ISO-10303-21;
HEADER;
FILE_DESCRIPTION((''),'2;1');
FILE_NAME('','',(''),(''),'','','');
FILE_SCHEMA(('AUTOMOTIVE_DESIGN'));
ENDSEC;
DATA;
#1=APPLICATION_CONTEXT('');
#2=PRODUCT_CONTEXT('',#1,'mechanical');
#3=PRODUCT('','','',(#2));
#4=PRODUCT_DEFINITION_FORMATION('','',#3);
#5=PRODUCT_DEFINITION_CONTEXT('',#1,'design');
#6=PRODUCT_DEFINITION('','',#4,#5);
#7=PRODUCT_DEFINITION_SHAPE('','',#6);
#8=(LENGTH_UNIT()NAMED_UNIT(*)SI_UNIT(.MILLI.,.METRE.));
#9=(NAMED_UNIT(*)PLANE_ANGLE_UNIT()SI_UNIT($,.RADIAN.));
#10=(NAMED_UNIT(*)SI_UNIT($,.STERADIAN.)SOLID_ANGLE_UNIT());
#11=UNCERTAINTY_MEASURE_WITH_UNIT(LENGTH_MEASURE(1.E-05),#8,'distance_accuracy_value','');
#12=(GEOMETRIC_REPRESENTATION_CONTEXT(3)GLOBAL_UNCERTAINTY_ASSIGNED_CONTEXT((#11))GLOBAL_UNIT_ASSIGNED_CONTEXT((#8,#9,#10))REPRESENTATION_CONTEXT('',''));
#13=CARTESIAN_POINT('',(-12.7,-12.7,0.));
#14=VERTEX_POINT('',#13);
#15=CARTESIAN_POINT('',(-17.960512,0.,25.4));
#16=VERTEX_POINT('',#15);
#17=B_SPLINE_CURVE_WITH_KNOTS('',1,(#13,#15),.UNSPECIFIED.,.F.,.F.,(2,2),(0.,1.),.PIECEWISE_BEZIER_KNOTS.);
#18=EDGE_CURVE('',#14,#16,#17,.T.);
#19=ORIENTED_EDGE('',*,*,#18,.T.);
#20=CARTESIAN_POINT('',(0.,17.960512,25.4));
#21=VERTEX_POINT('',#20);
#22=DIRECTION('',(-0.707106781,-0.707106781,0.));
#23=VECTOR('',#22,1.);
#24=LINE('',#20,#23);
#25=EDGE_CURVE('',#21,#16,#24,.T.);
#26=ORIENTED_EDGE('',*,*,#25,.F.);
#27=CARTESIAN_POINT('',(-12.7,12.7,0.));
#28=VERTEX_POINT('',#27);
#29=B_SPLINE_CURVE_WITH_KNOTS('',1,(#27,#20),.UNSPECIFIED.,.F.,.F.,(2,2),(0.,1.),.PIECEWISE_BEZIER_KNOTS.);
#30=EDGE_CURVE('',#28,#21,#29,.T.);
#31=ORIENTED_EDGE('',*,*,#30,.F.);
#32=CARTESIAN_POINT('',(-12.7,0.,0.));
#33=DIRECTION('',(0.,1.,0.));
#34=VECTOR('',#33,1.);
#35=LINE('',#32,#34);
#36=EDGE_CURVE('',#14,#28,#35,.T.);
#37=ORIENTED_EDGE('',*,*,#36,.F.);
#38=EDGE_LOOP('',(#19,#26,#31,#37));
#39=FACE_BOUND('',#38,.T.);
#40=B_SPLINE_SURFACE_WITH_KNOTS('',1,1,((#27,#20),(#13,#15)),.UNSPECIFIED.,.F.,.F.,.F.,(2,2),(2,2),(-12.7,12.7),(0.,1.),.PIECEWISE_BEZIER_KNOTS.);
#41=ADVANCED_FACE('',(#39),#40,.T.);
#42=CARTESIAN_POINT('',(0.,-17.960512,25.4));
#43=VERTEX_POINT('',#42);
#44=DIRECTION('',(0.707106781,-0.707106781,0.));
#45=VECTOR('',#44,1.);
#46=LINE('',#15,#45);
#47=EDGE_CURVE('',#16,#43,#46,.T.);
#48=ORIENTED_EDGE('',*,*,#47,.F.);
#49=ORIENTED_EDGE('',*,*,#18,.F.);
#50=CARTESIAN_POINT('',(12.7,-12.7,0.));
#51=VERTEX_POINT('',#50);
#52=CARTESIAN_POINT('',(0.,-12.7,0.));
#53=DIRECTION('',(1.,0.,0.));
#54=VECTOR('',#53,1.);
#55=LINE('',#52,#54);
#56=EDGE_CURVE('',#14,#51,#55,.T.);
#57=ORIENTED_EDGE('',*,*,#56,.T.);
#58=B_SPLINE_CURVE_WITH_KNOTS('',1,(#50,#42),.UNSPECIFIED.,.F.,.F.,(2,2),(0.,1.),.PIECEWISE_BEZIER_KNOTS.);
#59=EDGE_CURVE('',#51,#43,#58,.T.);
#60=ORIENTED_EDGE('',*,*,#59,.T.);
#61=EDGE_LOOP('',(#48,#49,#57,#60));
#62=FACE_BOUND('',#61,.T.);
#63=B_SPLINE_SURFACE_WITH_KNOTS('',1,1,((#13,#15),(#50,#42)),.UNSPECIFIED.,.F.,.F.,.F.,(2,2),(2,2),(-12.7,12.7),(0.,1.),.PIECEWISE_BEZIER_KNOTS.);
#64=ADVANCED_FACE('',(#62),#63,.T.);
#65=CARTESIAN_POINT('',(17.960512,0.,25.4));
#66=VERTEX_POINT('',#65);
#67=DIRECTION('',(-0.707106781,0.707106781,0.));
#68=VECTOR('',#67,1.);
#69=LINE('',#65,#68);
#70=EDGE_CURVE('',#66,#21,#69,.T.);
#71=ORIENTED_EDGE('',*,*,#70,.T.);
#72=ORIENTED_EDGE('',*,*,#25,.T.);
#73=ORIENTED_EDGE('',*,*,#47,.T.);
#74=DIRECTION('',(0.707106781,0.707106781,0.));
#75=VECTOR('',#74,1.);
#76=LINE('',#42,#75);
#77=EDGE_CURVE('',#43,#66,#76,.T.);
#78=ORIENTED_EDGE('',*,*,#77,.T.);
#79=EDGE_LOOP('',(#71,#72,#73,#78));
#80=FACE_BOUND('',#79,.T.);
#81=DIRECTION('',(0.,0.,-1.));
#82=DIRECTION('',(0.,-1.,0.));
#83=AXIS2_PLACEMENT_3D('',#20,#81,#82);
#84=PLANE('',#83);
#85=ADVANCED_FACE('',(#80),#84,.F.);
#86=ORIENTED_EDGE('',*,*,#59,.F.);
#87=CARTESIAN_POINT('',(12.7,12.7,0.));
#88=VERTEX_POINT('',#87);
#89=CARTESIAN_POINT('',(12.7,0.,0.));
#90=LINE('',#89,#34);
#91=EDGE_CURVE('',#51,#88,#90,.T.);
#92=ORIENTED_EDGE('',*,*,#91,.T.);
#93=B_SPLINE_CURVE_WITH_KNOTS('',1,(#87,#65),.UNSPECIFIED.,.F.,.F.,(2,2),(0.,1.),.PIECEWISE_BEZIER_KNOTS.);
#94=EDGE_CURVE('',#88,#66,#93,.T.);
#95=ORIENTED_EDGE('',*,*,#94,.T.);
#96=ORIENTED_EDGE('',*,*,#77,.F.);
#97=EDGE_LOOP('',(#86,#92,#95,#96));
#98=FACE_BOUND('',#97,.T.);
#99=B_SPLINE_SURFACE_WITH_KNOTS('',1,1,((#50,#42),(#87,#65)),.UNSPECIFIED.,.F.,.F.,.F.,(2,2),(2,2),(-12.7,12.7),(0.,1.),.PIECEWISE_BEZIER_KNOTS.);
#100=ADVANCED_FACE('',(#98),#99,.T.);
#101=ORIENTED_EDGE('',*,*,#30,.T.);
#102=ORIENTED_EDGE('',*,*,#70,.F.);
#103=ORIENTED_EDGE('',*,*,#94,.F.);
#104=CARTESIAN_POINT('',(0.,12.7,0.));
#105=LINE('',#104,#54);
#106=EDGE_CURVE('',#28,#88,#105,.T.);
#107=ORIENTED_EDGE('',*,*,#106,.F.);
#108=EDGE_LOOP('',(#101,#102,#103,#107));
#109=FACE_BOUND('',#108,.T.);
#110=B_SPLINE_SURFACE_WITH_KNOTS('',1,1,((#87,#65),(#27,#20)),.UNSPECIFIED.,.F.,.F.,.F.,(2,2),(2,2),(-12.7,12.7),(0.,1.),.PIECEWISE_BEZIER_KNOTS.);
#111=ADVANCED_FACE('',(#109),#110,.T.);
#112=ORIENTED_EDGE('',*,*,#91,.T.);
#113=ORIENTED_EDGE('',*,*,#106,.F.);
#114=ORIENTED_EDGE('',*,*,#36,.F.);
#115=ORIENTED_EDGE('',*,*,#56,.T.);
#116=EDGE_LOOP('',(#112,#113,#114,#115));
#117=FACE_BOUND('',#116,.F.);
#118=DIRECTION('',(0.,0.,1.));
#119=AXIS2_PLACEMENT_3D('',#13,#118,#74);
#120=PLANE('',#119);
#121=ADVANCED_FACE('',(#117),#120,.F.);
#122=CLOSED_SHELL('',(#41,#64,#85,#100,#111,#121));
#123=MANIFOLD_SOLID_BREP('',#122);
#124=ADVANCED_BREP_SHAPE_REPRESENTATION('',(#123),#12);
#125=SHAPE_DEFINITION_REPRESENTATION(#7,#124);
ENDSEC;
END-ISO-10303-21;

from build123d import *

# Parameters (mm, degrees)
F1_W = 25.4
F1_H = 25.4


# Not quite as in the source:
# - a variable given as a bare number and used for a length is read in inches; the dataset says mm whatever the document's units were


with BuildPart() as f4:
    # F1 (on Top) → F4 section 0
    with BuildSketch(Plane.XY):
        Rectangle(F1_W, F1_H)
    # F3 (on offset) → F4 section 1
    with BuildSketch(Plane.XY.offset(25.4)):
        Polygon((17.9605122421, 0), (0, 17.9605122421), (-17.9605122421, 0), (0, -17.9605122421), align=None)
    loft()


solid = f4.part
